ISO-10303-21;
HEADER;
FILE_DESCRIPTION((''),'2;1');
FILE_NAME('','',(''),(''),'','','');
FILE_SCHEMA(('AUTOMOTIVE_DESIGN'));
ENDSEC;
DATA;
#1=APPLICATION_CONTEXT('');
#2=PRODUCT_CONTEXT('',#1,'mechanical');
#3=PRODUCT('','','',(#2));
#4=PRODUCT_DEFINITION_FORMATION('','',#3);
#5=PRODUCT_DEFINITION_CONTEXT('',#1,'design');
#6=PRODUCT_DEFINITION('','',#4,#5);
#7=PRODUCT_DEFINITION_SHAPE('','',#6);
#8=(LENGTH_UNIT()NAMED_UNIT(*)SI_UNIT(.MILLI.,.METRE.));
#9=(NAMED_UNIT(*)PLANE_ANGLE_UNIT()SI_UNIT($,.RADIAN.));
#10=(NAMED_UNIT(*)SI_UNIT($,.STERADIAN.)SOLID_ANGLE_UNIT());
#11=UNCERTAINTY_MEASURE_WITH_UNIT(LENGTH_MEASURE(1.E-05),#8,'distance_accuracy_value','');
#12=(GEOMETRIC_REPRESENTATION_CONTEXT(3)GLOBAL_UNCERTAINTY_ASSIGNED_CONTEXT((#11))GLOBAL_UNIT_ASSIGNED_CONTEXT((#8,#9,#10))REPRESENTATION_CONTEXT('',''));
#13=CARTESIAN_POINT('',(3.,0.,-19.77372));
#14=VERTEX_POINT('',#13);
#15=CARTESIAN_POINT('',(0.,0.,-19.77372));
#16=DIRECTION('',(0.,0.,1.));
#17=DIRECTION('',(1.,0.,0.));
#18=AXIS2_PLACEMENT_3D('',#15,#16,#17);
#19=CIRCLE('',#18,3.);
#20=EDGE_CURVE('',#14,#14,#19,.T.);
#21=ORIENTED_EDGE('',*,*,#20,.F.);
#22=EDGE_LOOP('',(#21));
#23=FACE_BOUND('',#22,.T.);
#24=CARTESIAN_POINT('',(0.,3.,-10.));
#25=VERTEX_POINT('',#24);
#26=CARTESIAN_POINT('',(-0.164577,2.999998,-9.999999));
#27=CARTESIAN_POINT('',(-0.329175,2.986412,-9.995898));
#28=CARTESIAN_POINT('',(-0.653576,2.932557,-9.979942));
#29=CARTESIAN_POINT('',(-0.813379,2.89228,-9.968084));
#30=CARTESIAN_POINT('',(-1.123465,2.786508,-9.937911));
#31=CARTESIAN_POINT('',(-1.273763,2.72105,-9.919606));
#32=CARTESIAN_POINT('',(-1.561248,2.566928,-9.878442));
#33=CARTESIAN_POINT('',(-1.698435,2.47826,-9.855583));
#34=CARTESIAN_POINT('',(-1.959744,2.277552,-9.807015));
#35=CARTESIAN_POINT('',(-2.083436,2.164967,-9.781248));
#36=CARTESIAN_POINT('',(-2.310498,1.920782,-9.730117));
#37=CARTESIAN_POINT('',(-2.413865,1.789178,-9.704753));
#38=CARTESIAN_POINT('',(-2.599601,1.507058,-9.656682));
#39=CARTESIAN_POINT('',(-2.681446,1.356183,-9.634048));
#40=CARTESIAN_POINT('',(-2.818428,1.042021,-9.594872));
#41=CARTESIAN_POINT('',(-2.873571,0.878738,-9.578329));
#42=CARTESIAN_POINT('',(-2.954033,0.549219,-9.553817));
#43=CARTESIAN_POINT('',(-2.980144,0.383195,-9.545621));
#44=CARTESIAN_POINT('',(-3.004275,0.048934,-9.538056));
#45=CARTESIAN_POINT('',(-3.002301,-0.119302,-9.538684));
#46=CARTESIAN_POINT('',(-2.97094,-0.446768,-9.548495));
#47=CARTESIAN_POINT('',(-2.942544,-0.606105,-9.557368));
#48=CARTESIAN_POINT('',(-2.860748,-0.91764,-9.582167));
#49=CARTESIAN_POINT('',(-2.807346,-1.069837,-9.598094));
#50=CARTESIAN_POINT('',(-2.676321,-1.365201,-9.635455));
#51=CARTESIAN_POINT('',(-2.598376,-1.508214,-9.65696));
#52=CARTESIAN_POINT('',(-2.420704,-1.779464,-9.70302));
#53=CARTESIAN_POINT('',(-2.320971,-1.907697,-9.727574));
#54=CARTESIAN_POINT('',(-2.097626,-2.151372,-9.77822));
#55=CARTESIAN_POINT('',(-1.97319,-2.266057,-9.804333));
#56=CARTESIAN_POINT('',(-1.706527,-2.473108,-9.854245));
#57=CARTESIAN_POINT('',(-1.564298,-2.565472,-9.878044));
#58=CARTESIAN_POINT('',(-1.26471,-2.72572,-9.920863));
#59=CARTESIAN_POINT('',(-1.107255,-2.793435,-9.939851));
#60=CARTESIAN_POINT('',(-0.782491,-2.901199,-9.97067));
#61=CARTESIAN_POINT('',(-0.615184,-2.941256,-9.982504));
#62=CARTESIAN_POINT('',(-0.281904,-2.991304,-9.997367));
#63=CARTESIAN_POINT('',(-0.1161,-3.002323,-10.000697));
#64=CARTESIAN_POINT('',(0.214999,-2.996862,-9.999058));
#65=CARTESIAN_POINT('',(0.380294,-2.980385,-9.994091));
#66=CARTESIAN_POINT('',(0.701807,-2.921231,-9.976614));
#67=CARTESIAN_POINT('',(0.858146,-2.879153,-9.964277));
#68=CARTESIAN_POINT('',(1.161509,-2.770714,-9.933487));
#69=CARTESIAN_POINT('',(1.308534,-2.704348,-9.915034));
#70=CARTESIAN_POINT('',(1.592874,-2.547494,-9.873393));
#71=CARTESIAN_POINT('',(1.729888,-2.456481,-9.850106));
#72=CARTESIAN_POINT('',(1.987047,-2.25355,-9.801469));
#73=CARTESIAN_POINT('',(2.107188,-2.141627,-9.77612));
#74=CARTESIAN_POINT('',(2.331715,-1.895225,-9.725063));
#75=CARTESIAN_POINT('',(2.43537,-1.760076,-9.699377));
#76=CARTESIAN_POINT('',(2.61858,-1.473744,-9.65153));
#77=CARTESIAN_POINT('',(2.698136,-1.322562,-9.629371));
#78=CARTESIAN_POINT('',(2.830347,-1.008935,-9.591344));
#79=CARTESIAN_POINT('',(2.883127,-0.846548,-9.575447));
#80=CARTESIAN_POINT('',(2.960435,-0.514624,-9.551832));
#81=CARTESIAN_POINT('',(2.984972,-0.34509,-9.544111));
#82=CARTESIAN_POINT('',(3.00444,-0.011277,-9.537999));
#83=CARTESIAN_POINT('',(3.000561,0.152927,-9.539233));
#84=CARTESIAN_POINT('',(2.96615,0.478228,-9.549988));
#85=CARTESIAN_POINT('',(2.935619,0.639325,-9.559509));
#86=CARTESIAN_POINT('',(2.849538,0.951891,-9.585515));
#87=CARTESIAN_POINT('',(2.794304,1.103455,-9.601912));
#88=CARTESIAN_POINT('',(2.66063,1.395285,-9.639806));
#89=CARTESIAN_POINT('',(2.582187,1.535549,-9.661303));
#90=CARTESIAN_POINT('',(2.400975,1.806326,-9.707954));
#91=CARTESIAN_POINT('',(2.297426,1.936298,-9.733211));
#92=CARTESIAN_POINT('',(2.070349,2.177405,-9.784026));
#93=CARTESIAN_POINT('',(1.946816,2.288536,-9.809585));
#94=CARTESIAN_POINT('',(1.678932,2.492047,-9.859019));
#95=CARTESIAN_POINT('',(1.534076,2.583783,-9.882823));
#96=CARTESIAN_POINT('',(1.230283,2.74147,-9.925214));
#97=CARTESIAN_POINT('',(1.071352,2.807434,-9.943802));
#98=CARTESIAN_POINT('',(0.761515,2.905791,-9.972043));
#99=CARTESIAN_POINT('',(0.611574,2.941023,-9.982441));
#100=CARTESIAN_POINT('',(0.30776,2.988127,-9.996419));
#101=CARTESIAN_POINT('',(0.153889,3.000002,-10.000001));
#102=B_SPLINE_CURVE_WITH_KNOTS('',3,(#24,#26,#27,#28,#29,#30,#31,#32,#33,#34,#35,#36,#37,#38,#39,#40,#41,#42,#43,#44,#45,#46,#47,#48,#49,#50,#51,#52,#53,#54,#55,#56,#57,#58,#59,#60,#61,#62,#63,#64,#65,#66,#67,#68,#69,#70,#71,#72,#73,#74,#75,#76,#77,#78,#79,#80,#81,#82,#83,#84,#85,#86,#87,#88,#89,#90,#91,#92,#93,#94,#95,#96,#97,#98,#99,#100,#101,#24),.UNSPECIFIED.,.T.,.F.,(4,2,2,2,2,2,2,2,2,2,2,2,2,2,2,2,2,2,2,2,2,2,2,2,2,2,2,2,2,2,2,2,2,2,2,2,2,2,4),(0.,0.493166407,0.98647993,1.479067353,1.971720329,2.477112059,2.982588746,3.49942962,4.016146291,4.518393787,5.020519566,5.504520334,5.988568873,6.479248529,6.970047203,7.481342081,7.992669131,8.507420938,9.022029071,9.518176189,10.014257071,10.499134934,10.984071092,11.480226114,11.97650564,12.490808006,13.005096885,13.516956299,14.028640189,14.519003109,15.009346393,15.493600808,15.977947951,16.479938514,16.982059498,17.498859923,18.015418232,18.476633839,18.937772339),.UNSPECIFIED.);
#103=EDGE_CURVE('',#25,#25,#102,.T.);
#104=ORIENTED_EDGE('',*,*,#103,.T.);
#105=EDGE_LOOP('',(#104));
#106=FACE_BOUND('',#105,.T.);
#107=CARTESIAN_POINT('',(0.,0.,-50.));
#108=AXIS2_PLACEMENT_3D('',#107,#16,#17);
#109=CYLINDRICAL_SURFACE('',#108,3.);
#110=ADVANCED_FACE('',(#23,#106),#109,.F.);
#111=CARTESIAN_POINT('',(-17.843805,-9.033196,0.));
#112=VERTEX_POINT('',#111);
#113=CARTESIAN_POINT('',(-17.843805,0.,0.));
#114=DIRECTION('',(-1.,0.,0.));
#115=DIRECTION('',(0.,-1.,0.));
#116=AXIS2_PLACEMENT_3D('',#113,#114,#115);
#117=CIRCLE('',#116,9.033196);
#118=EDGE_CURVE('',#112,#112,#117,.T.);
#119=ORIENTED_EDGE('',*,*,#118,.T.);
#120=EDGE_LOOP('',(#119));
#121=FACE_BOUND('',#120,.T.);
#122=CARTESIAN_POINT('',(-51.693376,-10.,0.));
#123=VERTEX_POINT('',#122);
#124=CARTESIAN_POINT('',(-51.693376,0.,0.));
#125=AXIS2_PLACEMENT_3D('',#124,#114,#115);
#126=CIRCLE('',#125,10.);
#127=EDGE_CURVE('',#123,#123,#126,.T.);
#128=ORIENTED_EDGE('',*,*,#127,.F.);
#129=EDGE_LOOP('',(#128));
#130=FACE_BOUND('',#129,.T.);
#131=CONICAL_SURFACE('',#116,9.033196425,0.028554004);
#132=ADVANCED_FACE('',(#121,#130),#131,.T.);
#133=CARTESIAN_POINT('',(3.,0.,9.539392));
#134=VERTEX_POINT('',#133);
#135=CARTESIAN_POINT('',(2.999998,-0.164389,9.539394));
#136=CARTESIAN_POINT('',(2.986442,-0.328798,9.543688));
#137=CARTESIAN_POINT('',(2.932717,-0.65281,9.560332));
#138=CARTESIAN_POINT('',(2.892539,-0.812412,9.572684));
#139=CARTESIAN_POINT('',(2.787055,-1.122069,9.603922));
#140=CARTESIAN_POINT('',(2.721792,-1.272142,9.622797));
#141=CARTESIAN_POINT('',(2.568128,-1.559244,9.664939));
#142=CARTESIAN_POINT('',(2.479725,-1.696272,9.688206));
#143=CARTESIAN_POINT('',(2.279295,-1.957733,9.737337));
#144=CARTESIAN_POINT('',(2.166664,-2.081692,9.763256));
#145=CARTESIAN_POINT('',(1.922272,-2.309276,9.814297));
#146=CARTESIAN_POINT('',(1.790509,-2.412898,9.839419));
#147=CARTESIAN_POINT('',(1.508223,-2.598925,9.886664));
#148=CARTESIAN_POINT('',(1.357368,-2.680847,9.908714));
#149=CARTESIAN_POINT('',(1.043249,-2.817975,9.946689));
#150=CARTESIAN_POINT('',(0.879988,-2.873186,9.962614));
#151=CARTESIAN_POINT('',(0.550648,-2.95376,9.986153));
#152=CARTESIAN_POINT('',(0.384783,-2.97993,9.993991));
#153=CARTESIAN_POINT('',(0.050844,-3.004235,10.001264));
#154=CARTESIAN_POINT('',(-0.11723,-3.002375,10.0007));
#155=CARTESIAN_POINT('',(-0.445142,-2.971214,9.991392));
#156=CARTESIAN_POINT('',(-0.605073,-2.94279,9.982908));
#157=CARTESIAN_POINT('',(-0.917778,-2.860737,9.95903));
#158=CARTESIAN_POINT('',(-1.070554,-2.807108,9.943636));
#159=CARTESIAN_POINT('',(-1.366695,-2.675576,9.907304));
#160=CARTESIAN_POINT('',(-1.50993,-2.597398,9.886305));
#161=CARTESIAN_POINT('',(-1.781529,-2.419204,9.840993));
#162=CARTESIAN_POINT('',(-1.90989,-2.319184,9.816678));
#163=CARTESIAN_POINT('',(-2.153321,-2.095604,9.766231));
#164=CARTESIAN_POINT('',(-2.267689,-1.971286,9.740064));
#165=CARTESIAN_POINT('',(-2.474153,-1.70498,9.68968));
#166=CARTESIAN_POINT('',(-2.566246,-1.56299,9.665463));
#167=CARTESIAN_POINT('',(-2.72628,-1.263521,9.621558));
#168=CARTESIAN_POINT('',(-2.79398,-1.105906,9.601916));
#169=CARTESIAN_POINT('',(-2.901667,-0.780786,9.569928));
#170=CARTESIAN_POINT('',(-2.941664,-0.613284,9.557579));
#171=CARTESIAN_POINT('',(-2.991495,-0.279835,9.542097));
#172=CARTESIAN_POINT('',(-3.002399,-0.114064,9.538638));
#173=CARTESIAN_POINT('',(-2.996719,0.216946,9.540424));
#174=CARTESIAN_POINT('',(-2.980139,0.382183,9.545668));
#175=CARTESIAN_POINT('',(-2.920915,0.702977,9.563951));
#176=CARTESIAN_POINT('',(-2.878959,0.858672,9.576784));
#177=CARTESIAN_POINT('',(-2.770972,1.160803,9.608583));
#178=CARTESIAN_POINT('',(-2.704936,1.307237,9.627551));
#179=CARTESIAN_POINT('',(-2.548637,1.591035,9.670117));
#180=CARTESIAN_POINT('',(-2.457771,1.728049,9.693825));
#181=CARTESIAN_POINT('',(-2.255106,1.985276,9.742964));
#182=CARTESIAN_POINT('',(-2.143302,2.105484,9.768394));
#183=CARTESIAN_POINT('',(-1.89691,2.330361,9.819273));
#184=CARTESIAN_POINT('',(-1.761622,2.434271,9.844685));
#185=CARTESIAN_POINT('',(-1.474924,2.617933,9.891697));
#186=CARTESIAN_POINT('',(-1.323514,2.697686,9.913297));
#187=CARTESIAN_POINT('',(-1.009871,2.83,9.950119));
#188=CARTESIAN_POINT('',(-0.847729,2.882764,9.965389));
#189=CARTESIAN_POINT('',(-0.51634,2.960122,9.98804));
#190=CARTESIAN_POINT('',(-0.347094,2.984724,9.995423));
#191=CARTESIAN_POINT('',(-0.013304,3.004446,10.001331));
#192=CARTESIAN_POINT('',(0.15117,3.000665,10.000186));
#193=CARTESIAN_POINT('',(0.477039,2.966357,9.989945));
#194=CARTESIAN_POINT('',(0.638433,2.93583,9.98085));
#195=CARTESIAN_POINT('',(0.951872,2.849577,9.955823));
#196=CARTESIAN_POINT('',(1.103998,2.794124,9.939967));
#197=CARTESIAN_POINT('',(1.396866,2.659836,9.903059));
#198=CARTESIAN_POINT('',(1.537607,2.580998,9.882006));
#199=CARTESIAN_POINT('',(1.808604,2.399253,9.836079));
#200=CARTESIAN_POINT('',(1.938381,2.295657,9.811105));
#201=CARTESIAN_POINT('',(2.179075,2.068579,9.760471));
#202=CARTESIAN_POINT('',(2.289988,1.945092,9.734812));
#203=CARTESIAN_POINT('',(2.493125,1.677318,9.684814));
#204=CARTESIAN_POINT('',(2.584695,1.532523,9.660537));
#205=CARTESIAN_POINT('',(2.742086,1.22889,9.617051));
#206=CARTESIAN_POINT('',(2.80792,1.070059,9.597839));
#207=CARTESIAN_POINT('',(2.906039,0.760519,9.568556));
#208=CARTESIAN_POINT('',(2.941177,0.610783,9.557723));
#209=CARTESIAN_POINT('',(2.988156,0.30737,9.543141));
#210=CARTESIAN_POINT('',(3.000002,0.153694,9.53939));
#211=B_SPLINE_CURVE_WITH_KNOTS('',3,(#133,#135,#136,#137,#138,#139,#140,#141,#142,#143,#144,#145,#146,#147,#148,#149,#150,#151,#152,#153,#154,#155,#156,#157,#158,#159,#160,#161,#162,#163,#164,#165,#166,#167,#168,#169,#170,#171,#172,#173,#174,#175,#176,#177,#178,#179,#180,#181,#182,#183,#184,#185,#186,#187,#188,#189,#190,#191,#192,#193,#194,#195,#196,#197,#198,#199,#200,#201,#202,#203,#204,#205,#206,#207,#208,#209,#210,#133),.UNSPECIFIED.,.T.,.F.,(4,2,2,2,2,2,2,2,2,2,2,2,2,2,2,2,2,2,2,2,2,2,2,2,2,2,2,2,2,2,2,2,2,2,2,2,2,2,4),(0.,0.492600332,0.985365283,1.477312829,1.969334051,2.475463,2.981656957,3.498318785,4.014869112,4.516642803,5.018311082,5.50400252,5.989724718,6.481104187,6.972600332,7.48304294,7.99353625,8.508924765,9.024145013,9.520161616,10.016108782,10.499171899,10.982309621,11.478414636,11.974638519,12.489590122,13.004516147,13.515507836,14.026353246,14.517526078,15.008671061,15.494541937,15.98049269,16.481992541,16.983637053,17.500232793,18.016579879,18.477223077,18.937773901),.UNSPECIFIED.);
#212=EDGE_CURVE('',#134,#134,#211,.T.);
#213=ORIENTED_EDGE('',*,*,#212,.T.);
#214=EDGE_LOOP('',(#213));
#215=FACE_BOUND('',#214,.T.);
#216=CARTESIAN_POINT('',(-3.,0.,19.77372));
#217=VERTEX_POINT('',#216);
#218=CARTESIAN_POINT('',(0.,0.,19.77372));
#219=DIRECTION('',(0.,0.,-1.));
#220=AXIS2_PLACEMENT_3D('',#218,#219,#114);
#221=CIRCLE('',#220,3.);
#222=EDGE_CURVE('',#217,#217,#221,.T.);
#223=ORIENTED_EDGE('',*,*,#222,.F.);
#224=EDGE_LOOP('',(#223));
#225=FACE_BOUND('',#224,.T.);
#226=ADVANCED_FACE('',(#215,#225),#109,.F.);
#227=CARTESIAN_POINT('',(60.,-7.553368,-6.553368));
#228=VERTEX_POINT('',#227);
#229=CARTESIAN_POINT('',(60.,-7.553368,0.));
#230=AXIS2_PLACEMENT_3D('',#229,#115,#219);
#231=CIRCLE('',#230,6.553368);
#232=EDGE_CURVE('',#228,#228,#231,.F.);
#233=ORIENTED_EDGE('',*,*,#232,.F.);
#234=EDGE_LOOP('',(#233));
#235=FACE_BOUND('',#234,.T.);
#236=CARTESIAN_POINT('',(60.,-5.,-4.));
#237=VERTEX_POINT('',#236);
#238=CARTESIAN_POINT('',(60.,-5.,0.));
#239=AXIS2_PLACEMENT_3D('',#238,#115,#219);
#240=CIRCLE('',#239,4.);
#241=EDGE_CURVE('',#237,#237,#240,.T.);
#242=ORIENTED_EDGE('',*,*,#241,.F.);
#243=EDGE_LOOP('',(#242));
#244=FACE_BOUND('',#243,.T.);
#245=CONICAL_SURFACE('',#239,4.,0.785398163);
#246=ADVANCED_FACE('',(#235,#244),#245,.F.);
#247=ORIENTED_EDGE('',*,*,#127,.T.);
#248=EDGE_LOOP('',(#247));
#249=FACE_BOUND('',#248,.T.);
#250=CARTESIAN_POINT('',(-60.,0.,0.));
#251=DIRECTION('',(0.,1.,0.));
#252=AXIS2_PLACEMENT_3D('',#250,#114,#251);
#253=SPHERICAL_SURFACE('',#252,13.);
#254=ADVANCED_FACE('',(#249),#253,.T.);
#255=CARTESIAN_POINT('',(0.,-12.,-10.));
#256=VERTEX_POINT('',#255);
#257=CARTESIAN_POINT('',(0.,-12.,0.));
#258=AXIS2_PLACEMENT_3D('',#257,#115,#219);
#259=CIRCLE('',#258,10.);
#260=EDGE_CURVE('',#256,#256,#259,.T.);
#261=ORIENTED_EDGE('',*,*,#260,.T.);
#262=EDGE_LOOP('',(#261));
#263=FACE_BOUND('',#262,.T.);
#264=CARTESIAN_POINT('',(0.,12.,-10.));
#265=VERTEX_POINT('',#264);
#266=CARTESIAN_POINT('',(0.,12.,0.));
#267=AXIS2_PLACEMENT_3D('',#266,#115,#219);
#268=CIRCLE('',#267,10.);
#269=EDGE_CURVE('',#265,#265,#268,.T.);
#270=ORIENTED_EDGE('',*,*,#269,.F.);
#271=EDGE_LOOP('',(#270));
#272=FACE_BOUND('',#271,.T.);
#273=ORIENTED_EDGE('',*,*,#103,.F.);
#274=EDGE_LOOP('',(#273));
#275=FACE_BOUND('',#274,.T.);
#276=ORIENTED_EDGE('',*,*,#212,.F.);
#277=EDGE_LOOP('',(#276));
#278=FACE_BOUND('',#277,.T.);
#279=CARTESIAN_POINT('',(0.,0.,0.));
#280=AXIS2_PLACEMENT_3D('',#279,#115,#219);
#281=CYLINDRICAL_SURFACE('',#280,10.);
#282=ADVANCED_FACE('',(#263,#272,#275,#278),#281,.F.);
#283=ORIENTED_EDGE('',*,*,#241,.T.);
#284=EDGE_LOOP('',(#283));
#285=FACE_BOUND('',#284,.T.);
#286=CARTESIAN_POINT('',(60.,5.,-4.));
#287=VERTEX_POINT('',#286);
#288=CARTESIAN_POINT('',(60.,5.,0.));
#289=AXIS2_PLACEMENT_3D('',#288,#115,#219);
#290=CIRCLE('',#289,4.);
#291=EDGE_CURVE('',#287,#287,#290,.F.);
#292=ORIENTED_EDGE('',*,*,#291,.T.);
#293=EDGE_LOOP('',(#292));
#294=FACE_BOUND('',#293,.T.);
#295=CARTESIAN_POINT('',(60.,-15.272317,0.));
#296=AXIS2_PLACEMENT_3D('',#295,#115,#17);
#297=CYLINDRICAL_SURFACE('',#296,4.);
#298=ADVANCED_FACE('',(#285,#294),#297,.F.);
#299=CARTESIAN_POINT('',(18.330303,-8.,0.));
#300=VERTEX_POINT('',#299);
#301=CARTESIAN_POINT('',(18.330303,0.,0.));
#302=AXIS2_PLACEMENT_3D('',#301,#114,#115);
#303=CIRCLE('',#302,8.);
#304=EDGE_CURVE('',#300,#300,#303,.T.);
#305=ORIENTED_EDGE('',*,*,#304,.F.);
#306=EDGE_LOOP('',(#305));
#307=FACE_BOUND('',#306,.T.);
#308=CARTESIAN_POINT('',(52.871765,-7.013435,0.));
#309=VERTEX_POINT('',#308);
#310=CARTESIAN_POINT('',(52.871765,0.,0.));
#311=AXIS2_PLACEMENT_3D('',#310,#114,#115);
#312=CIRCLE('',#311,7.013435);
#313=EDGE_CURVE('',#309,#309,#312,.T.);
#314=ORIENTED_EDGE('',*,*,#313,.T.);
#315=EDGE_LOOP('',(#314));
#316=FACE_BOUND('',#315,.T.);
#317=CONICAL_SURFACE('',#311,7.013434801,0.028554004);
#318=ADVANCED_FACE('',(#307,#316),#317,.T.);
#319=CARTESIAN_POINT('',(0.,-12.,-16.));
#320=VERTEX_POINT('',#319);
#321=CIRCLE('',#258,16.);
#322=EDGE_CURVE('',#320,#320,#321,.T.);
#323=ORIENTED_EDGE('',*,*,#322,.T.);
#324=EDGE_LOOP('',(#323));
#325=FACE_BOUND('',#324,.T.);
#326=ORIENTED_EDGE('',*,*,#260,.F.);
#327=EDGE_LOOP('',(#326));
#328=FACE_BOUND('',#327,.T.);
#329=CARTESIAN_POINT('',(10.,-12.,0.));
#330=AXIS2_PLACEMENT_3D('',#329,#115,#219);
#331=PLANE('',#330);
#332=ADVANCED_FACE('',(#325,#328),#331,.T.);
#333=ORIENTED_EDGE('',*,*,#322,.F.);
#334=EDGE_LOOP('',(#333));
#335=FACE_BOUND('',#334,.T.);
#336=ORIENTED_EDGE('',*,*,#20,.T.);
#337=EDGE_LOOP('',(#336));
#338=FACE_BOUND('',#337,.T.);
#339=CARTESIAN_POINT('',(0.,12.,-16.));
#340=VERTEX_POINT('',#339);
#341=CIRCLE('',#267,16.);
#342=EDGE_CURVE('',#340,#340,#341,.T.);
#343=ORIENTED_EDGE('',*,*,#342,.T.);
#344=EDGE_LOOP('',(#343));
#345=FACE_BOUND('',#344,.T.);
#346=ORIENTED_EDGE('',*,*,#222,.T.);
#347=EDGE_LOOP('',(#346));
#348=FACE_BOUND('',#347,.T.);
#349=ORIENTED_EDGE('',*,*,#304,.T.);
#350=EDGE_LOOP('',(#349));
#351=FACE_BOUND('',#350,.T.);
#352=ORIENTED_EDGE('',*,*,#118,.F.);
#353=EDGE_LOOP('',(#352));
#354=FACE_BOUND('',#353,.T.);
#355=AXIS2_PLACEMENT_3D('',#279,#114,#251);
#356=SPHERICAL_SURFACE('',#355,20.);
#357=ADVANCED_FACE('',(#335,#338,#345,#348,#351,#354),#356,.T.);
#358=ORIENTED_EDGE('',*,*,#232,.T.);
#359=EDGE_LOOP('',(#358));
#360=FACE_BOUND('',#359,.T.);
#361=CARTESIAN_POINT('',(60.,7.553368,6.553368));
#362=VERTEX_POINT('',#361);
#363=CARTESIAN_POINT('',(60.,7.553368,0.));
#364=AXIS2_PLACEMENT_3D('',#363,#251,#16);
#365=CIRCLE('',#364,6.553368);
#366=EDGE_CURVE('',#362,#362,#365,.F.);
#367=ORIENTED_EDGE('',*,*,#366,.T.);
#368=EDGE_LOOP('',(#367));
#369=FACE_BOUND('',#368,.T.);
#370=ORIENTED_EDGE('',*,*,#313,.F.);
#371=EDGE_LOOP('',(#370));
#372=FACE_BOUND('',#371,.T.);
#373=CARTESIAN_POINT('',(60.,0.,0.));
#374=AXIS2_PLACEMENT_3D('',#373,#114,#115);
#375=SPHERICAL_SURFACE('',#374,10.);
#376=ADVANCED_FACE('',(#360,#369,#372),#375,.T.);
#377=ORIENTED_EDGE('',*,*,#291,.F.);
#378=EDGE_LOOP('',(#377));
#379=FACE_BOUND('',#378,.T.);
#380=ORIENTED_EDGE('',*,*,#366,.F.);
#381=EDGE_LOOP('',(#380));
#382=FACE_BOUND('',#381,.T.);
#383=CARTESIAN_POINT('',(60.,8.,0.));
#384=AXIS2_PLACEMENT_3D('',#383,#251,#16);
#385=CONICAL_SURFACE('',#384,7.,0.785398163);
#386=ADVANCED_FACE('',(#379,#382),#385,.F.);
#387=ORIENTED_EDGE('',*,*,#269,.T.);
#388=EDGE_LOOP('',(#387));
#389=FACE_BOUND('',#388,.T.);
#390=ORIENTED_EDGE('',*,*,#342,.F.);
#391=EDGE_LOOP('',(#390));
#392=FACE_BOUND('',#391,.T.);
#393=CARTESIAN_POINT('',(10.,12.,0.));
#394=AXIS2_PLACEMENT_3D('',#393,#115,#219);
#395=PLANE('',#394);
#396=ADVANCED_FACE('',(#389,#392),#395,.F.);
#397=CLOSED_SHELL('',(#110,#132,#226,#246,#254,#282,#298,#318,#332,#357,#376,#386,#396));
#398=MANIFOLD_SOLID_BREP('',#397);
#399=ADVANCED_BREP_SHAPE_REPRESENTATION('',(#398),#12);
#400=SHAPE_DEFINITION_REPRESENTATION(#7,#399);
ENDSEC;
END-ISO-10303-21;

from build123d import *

# Parameters (mm, degrees)
CHAMFER_1_SIZE      = 3
SKETCH_3_R          = 3
CUT_EXTRUDE_1_DEPTH = 50


with BuildPart() as part:
    # Эскиз1 → Повернуть1 (revolve)
    with BuildSketch(Plane.XY):
        with BuildLine():
            Line((-51.693376137, 10), (-17.843804593, 9.033196425))
            ThreePointArc((-17.843804593, 9.033196425), (0.571002482, 19.991847242), (18.33030278, 8))
            Line((18.33030278, 8), (52.871765135, 7.013434801))
            ThreePointArc((52.871765135, 7.013434801), (63.789304115, 9.254251689), (70, 0))
            Line((70, 0), (-73, 0))
            ThreePointArc((-73, 0), (-65.523309234, 11.768307232), (-51.693376137, 10))
        make_face()
    revolve(axis=Axis((-73, 0, 0), (1, 0, 0)))

    # Эскиз2 → Вырез-Повернуть1 (revolve, cut)
    with BuildSketch(Plane.XY, mode=Mode.PRIVATE) as cut_revolve_1_sk:
        with BuildLine():
            Line((0, -12), (0, 12))
            Line((0, 12), (0, 20))
            ThreePointArc((0, 20), (8.94427191, 17.88854382), (16, 12))
            Line((16, 12), (10, 12))
            Line((10, 12), (10, -12))
            Line((10, -12), (16, -12))
            ThreePointArc((16, -12), (8.94427191, -17.88854382), (0, -20))
            Line((0, -20), (0, -12))
        make_face()
    revolve(cut_revolve_1_sk.sketch.rotate(Axis((0, 0, 0), (0, 1, 0)), 90), axis=Axis((0, 0, 0), (0, 1, 0)), mode=Mode.SUBTRACT)

    # Эскиз2<3> → Вырез-Повернуть2 (revolve, cut)
    with BuildSketch(Plane.XY):
        Polygon((66, -8), (66, -15.272316645), (60, -15.272316645), (60, 15.272316645), (66, 15.272316645), (66, 8), (64, 8), (64, -8), align=None)
    revolve(axis=Axis((60, -15.272316645, 0), (0, 1, 0)), mode=Mode.SUBTRACT)

    # Фаска1
    # the kernel refuses this chamfer: 3 mm, written as the material it takes off along each edge
    with BuildSketch(Plane(origin=(60, -8, 0), x_dir=(1, 0, 0), z_dir=(0, 0, 1))) as chamfer_1_piece_1:
        Polygon((4 + CHAMFER_1_SIZE, 0), (4, CHAMFER_1_SIZE), (4, 0), align=None)
    revolve(axis=Axis((60, -8, 0), (0, 1, 0)), mode=Mode.SUBTRACT)
    with BuildSketch(Plane(origin=(60, 8, 0), x_dir=(1, 0, 0), z_dir=(0, 0, 1))) as chamfer_1_piece_2:
        Polygon((4 + CHAMFER_1_SIZE, 0), (4, -CHAMFER_1_SIZE), (4, 0), align=None)
    revolve(axis=Axis((60, 8, 0), (0, 1, 0)), mode=Mode.SUBTRACT)

    # Эскиз3 → Вырез-Вытянуть1 (cut, symmetric)
    with BuildSketch(Plane.XY):
        Circle(SKETCH_3_R)
    extrude(amount=CUT_EXTRUDE_1_DEPTH, both=True, mode=Mode.SUBTRACT)


solid = part.part
